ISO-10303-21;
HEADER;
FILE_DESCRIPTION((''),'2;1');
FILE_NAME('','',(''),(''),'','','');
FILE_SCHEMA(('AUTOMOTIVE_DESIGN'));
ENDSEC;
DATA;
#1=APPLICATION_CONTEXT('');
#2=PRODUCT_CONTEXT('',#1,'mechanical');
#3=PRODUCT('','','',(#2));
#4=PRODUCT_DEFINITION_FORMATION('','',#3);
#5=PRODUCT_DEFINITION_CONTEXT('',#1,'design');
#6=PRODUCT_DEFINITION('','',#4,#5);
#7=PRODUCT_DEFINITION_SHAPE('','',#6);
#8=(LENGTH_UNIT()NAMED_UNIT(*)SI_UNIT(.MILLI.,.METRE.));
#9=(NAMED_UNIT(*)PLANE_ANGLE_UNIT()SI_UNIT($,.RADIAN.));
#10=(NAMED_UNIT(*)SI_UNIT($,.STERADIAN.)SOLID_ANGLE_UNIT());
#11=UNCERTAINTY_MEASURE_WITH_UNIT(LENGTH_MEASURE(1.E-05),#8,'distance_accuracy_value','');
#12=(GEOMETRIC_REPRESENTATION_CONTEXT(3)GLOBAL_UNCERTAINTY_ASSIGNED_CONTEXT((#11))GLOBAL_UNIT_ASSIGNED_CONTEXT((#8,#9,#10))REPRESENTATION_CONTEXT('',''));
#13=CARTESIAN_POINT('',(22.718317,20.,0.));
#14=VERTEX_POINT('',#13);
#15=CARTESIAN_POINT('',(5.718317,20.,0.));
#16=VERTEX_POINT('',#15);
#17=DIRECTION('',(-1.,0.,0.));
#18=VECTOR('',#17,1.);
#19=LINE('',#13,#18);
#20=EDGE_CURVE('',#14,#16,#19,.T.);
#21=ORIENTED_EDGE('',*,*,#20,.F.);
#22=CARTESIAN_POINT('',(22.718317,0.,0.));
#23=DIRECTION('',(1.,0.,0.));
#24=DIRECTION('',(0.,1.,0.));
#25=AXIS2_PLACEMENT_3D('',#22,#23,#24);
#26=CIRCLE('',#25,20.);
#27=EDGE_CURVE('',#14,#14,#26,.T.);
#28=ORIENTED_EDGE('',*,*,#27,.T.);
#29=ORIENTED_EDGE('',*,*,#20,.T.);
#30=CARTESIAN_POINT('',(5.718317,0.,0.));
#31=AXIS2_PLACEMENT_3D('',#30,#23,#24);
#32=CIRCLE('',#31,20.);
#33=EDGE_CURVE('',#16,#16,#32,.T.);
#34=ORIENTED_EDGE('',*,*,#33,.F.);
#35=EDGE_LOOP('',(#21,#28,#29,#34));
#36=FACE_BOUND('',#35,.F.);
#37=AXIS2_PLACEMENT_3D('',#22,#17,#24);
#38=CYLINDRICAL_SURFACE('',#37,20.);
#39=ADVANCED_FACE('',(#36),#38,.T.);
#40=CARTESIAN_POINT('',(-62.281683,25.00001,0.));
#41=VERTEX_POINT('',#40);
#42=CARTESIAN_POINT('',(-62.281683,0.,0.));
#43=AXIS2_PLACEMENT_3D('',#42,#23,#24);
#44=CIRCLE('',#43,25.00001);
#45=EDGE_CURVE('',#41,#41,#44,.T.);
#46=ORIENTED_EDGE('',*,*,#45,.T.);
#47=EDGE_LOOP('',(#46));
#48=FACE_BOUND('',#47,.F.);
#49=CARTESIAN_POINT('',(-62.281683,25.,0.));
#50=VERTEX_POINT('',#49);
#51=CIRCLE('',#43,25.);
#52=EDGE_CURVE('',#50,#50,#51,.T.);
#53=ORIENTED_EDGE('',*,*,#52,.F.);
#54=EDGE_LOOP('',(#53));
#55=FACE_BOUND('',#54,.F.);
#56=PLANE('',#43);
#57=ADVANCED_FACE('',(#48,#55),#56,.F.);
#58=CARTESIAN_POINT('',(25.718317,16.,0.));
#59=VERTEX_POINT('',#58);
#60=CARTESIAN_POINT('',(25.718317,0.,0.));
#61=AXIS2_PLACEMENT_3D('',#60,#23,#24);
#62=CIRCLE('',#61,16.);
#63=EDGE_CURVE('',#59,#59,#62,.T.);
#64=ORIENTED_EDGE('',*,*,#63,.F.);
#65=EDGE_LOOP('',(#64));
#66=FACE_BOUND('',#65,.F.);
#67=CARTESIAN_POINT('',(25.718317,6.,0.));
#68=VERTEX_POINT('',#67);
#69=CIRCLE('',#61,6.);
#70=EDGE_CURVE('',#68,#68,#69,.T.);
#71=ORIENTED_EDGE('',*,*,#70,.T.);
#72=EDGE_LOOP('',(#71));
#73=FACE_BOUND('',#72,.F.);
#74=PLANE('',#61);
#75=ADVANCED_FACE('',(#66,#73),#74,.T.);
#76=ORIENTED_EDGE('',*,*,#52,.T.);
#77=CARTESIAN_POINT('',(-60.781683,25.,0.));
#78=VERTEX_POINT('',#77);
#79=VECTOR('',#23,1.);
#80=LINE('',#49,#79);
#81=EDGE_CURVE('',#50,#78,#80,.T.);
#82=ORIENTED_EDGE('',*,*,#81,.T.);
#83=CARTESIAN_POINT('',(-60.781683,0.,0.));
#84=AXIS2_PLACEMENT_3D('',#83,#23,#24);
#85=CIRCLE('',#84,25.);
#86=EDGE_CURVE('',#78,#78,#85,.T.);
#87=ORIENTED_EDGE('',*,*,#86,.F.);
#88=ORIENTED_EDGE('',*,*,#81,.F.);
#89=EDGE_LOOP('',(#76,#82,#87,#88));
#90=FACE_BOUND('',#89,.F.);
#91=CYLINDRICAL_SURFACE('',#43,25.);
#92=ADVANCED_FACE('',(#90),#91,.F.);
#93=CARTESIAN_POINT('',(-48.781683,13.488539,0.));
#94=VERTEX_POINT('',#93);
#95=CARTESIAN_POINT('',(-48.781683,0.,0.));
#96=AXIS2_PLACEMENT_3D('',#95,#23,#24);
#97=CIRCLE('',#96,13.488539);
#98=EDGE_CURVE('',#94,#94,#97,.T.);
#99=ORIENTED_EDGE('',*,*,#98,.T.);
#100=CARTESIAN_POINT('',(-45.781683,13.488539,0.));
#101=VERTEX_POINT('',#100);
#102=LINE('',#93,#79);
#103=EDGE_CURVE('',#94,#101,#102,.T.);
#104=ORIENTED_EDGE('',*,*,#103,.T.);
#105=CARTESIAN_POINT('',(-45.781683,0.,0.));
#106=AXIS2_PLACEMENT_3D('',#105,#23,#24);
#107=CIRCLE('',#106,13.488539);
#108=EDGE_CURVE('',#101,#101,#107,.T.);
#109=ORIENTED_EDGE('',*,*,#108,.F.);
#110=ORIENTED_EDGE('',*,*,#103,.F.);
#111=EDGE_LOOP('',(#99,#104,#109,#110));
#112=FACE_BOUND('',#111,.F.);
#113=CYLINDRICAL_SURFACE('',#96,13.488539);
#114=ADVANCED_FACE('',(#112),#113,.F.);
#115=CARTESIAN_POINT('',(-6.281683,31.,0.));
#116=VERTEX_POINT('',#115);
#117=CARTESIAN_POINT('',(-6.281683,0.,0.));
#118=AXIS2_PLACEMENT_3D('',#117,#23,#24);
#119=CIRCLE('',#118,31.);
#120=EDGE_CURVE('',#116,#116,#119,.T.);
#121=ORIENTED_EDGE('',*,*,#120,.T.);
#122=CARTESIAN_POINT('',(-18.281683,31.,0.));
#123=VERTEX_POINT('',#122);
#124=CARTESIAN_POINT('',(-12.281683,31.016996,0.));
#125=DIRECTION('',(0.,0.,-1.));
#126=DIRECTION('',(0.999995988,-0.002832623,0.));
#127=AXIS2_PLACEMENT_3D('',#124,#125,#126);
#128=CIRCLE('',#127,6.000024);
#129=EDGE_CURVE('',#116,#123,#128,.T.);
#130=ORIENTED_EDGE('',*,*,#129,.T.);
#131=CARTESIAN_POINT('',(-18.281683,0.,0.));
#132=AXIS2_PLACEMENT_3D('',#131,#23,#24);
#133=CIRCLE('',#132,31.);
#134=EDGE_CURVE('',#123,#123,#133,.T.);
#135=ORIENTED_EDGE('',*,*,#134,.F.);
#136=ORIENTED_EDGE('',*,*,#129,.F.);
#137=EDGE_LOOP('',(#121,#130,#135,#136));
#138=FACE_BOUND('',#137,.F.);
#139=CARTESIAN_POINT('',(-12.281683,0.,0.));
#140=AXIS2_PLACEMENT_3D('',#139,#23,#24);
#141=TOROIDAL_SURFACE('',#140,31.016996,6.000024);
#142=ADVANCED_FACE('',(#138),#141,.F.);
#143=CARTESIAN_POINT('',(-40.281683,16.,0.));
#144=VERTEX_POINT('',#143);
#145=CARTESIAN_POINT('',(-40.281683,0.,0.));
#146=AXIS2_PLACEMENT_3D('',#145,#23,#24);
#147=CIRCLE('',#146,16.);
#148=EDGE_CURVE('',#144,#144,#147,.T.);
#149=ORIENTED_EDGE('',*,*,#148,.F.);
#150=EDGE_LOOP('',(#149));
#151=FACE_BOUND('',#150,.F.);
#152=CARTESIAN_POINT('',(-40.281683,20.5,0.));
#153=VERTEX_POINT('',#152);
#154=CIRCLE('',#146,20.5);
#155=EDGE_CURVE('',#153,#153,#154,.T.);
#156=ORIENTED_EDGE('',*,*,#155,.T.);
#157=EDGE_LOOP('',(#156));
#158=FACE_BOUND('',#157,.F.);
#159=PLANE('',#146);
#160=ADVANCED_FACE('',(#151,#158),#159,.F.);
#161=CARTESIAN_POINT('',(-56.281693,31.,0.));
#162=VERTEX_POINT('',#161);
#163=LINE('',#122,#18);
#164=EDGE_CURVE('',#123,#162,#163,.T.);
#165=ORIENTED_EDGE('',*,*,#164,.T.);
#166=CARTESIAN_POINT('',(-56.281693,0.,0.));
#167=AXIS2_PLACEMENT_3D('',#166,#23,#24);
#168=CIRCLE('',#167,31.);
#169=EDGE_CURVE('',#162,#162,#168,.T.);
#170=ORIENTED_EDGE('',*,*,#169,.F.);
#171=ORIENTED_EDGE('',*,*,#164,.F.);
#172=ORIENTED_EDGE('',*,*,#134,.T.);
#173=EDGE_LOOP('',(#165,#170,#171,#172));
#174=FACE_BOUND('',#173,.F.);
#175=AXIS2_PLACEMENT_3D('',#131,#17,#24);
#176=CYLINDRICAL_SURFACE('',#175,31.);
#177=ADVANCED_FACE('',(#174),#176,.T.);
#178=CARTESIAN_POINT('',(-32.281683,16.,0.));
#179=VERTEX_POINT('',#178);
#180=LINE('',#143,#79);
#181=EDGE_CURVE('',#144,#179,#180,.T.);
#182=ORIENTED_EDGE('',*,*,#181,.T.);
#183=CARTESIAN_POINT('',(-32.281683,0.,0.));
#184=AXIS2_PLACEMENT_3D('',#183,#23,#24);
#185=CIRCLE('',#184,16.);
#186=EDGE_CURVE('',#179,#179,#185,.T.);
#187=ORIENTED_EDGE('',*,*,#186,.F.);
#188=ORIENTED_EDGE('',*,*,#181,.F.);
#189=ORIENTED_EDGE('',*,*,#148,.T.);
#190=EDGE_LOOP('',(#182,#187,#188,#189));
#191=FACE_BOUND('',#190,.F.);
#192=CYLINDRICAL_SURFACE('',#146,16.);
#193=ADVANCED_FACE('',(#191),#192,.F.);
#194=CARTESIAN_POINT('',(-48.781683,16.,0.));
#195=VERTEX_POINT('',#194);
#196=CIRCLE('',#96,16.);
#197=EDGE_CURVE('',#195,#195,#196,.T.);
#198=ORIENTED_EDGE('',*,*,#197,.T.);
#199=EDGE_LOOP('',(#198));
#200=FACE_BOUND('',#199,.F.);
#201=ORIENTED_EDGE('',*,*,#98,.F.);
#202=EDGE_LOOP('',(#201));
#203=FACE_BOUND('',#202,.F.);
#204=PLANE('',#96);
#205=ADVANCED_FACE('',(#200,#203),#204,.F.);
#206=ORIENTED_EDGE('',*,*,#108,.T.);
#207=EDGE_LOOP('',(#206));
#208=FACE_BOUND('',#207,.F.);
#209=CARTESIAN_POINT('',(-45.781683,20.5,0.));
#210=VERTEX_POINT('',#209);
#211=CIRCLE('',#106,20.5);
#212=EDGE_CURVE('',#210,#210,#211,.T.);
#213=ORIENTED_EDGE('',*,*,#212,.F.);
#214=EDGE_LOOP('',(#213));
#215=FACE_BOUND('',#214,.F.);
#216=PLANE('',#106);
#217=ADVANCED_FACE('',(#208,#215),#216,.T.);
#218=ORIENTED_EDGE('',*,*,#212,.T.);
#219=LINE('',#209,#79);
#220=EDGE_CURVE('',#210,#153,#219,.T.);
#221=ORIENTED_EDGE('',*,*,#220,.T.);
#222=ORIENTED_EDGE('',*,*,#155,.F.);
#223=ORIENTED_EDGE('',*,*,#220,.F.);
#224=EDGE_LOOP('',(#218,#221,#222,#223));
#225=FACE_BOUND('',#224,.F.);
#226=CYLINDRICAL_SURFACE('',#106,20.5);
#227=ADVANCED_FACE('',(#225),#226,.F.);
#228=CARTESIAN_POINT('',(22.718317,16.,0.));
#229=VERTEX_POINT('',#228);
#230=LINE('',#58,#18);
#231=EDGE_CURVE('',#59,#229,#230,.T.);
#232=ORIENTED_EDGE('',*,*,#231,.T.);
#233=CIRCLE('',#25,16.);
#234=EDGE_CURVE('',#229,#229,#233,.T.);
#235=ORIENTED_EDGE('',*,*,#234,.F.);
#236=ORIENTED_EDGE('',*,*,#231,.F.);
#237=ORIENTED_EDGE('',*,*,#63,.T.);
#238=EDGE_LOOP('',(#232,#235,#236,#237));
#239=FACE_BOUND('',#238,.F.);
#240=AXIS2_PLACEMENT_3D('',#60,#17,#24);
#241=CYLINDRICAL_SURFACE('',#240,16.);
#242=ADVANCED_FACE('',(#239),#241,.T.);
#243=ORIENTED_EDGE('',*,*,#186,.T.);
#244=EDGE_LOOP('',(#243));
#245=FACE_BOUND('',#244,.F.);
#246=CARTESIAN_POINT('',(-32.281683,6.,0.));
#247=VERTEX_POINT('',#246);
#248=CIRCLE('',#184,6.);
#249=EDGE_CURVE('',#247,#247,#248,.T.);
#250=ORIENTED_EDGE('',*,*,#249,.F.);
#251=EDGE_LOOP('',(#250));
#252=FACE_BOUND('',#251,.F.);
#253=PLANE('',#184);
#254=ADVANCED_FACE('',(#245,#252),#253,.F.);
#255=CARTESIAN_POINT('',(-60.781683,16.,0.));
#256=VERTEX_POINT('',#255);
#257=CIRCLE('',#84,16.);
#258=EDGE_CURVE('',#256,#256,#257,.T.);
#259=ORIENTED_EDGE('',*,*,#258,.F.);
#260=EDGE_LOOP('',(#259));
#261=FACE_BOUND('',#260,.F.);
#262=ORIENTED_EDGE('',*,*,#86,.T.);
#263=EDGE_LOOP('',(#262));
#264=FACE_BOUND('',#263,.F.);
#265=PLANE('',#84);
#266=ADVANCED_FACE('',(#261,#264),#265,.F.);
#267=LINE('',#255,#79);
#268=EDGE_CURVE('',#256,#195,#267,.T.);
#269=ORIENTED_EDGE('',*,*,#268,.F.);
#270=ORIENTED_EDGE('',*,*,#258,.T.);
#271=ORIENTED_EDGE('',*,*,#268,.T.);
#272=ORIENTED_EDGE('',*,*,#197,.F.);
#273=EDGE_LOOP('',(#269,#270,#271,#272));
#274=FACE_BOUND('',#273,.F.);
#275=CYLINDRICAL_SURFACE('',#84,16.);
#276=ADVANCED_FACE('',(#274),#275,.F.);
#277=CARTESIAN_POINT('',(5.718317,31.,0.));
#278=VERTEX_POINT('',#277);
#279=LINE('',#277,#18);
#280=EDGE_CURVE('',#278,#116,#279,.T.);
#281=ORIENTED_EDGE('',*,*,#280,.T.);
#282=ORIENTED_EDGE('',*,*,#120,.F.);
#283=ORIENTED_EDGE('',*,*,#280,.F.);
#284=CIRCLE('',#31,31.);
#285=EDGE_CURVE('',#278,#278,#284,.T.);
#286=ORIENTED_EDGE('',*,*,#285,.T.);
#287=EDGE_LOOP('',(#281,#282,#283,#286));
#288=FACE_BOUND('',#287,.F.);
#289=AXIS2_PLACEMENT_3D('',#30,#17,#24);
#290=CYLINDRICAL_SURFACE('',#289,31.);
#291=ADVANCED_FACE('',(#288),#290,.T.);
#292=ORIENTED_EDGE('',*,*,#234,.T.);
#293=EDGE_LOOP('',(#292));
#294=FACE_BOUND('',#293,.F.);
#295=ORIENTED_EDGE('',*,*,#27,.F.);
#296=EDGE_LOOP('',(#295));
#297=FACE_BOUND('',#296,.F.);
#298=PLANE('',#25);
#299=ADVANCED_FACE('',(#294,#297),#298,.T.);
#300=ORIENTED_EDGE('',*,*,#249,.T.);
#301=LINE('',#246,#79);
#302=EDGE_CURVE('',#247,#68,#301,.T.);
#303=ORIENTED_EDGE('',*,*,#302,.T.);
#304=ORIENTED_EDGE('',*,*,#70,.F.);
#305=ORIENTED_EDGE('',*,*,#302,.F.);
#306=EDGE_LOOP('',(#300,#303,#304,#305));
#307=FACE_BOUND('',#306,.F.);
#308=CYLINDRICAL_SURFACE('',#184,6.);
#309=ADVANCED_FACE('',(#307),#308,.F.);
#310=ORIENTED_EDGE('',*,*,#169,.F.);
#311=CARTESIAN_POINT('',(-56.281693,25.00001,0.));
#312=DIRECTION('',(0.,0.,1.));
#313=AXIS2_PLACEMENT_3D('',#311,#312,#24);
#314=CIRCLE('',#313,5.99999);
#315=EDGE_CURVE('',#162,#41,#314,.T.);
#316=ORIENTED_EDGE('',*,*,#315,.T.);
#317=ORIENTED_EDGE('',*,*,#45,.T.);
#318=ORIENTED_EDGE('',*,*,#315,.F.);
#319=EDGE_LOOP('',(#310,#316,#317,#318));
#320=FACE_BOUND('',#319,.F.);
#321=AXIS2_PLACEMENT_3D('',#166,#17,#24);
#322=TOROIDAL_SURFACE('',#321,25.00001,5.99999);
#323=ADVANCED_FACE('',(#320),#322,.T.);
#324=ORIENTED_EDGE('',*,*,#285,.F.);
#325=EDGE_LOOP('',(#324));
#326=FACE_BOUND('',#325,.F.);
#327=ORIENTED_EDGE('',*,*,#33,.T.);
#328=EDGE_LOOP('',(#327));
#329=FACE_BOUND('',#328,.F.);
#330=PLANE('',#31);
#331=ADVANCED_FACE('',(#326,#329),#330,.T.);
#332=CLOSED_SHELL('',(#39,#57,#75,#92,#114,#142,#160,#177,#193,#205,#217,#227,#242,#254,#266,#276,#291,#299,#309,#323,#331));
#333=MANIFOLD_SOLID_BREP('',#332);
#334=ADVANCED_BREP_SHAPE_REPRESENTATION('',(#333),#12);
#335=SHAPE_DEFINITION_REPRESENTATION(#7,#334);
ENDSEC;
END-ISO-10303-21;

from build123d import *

# Parameters (mm, degrees)
F2_R = 5.99999


# Not quite as in the source:
# - a fillet or chamfer is up to 0.001 mm smaller than in the source, because OpenCascade refuses the exact size


with BuildPart() as f1:
    # F0 (on Top) → F1 (revolve)
    with BuildSketch(Plane.XY):
        with BuildLine():
            Line((-32.2816833258, 6), (25.7183166742, 6))
            Line((25.7183166742, 6), (25.7183166742, 16))
            Line((25.7183166742, 16), (22.7183166742, 16))
            Line((22.7183166742, 16), (22.7183166742, 20))
            Line((22.7183166742, 20), (5.7183166742, 20))
            Line((5.7183166742, 20), (5.7183166742, 31))
            Line((5.7183166742, 31), (-6.2816833258, 31))
            ThreePointArc((-6.2816833258, 31), (-12.2816833258, 25.0169717373), (-18.2816833258, 31))
            Line((-18.2816833258, 31), (-62.2816833258, 31))
            Line((-62.2816833258, 31), (-62.2816833258, 25))
            Line((-62.2816833258, 25), (-60.7816833258, 25))
            Line((-60.7816833258, 25), (-60.7816833258, 16))
            Line((-60.7816833258, 16), (-48.7816833258, 16))
            Line((-48.7816833258, 16), (-48.7816833258, 13.4885394946))
            Line((-48.7816833258, 13.4885394946), (-45.7816833258, 13.4885394946))
            Line((-45.7816833258, 13.4885394946), (-45.7816833258, 20.5))
            Line((-45.7816833258, 20.5), (-40.2816833258, 20.5))
            Line((-40.2816833258, 20.5), (-40.2816833258, 16))
            Line((-40.2816833258, 16), (-32.2816833258, 16))
            Line((-32.2816833258, 16), (-32.2816833258, 6))
        make_face()
    revolve(axis=Axis((-40.0854273438, 0, 0), (1, 0, 0)))

    # F2 (radius 6 in the source; OpenCascade refuses exactly that, so slightly less here)
    f2_edges = [f1.edges().sort_by_distance(p)[0] for p in [
        (-62.281683, -31, 0),
    ]]
    fillet(f2_edges, radius=F2_R)


solid = f1.part
